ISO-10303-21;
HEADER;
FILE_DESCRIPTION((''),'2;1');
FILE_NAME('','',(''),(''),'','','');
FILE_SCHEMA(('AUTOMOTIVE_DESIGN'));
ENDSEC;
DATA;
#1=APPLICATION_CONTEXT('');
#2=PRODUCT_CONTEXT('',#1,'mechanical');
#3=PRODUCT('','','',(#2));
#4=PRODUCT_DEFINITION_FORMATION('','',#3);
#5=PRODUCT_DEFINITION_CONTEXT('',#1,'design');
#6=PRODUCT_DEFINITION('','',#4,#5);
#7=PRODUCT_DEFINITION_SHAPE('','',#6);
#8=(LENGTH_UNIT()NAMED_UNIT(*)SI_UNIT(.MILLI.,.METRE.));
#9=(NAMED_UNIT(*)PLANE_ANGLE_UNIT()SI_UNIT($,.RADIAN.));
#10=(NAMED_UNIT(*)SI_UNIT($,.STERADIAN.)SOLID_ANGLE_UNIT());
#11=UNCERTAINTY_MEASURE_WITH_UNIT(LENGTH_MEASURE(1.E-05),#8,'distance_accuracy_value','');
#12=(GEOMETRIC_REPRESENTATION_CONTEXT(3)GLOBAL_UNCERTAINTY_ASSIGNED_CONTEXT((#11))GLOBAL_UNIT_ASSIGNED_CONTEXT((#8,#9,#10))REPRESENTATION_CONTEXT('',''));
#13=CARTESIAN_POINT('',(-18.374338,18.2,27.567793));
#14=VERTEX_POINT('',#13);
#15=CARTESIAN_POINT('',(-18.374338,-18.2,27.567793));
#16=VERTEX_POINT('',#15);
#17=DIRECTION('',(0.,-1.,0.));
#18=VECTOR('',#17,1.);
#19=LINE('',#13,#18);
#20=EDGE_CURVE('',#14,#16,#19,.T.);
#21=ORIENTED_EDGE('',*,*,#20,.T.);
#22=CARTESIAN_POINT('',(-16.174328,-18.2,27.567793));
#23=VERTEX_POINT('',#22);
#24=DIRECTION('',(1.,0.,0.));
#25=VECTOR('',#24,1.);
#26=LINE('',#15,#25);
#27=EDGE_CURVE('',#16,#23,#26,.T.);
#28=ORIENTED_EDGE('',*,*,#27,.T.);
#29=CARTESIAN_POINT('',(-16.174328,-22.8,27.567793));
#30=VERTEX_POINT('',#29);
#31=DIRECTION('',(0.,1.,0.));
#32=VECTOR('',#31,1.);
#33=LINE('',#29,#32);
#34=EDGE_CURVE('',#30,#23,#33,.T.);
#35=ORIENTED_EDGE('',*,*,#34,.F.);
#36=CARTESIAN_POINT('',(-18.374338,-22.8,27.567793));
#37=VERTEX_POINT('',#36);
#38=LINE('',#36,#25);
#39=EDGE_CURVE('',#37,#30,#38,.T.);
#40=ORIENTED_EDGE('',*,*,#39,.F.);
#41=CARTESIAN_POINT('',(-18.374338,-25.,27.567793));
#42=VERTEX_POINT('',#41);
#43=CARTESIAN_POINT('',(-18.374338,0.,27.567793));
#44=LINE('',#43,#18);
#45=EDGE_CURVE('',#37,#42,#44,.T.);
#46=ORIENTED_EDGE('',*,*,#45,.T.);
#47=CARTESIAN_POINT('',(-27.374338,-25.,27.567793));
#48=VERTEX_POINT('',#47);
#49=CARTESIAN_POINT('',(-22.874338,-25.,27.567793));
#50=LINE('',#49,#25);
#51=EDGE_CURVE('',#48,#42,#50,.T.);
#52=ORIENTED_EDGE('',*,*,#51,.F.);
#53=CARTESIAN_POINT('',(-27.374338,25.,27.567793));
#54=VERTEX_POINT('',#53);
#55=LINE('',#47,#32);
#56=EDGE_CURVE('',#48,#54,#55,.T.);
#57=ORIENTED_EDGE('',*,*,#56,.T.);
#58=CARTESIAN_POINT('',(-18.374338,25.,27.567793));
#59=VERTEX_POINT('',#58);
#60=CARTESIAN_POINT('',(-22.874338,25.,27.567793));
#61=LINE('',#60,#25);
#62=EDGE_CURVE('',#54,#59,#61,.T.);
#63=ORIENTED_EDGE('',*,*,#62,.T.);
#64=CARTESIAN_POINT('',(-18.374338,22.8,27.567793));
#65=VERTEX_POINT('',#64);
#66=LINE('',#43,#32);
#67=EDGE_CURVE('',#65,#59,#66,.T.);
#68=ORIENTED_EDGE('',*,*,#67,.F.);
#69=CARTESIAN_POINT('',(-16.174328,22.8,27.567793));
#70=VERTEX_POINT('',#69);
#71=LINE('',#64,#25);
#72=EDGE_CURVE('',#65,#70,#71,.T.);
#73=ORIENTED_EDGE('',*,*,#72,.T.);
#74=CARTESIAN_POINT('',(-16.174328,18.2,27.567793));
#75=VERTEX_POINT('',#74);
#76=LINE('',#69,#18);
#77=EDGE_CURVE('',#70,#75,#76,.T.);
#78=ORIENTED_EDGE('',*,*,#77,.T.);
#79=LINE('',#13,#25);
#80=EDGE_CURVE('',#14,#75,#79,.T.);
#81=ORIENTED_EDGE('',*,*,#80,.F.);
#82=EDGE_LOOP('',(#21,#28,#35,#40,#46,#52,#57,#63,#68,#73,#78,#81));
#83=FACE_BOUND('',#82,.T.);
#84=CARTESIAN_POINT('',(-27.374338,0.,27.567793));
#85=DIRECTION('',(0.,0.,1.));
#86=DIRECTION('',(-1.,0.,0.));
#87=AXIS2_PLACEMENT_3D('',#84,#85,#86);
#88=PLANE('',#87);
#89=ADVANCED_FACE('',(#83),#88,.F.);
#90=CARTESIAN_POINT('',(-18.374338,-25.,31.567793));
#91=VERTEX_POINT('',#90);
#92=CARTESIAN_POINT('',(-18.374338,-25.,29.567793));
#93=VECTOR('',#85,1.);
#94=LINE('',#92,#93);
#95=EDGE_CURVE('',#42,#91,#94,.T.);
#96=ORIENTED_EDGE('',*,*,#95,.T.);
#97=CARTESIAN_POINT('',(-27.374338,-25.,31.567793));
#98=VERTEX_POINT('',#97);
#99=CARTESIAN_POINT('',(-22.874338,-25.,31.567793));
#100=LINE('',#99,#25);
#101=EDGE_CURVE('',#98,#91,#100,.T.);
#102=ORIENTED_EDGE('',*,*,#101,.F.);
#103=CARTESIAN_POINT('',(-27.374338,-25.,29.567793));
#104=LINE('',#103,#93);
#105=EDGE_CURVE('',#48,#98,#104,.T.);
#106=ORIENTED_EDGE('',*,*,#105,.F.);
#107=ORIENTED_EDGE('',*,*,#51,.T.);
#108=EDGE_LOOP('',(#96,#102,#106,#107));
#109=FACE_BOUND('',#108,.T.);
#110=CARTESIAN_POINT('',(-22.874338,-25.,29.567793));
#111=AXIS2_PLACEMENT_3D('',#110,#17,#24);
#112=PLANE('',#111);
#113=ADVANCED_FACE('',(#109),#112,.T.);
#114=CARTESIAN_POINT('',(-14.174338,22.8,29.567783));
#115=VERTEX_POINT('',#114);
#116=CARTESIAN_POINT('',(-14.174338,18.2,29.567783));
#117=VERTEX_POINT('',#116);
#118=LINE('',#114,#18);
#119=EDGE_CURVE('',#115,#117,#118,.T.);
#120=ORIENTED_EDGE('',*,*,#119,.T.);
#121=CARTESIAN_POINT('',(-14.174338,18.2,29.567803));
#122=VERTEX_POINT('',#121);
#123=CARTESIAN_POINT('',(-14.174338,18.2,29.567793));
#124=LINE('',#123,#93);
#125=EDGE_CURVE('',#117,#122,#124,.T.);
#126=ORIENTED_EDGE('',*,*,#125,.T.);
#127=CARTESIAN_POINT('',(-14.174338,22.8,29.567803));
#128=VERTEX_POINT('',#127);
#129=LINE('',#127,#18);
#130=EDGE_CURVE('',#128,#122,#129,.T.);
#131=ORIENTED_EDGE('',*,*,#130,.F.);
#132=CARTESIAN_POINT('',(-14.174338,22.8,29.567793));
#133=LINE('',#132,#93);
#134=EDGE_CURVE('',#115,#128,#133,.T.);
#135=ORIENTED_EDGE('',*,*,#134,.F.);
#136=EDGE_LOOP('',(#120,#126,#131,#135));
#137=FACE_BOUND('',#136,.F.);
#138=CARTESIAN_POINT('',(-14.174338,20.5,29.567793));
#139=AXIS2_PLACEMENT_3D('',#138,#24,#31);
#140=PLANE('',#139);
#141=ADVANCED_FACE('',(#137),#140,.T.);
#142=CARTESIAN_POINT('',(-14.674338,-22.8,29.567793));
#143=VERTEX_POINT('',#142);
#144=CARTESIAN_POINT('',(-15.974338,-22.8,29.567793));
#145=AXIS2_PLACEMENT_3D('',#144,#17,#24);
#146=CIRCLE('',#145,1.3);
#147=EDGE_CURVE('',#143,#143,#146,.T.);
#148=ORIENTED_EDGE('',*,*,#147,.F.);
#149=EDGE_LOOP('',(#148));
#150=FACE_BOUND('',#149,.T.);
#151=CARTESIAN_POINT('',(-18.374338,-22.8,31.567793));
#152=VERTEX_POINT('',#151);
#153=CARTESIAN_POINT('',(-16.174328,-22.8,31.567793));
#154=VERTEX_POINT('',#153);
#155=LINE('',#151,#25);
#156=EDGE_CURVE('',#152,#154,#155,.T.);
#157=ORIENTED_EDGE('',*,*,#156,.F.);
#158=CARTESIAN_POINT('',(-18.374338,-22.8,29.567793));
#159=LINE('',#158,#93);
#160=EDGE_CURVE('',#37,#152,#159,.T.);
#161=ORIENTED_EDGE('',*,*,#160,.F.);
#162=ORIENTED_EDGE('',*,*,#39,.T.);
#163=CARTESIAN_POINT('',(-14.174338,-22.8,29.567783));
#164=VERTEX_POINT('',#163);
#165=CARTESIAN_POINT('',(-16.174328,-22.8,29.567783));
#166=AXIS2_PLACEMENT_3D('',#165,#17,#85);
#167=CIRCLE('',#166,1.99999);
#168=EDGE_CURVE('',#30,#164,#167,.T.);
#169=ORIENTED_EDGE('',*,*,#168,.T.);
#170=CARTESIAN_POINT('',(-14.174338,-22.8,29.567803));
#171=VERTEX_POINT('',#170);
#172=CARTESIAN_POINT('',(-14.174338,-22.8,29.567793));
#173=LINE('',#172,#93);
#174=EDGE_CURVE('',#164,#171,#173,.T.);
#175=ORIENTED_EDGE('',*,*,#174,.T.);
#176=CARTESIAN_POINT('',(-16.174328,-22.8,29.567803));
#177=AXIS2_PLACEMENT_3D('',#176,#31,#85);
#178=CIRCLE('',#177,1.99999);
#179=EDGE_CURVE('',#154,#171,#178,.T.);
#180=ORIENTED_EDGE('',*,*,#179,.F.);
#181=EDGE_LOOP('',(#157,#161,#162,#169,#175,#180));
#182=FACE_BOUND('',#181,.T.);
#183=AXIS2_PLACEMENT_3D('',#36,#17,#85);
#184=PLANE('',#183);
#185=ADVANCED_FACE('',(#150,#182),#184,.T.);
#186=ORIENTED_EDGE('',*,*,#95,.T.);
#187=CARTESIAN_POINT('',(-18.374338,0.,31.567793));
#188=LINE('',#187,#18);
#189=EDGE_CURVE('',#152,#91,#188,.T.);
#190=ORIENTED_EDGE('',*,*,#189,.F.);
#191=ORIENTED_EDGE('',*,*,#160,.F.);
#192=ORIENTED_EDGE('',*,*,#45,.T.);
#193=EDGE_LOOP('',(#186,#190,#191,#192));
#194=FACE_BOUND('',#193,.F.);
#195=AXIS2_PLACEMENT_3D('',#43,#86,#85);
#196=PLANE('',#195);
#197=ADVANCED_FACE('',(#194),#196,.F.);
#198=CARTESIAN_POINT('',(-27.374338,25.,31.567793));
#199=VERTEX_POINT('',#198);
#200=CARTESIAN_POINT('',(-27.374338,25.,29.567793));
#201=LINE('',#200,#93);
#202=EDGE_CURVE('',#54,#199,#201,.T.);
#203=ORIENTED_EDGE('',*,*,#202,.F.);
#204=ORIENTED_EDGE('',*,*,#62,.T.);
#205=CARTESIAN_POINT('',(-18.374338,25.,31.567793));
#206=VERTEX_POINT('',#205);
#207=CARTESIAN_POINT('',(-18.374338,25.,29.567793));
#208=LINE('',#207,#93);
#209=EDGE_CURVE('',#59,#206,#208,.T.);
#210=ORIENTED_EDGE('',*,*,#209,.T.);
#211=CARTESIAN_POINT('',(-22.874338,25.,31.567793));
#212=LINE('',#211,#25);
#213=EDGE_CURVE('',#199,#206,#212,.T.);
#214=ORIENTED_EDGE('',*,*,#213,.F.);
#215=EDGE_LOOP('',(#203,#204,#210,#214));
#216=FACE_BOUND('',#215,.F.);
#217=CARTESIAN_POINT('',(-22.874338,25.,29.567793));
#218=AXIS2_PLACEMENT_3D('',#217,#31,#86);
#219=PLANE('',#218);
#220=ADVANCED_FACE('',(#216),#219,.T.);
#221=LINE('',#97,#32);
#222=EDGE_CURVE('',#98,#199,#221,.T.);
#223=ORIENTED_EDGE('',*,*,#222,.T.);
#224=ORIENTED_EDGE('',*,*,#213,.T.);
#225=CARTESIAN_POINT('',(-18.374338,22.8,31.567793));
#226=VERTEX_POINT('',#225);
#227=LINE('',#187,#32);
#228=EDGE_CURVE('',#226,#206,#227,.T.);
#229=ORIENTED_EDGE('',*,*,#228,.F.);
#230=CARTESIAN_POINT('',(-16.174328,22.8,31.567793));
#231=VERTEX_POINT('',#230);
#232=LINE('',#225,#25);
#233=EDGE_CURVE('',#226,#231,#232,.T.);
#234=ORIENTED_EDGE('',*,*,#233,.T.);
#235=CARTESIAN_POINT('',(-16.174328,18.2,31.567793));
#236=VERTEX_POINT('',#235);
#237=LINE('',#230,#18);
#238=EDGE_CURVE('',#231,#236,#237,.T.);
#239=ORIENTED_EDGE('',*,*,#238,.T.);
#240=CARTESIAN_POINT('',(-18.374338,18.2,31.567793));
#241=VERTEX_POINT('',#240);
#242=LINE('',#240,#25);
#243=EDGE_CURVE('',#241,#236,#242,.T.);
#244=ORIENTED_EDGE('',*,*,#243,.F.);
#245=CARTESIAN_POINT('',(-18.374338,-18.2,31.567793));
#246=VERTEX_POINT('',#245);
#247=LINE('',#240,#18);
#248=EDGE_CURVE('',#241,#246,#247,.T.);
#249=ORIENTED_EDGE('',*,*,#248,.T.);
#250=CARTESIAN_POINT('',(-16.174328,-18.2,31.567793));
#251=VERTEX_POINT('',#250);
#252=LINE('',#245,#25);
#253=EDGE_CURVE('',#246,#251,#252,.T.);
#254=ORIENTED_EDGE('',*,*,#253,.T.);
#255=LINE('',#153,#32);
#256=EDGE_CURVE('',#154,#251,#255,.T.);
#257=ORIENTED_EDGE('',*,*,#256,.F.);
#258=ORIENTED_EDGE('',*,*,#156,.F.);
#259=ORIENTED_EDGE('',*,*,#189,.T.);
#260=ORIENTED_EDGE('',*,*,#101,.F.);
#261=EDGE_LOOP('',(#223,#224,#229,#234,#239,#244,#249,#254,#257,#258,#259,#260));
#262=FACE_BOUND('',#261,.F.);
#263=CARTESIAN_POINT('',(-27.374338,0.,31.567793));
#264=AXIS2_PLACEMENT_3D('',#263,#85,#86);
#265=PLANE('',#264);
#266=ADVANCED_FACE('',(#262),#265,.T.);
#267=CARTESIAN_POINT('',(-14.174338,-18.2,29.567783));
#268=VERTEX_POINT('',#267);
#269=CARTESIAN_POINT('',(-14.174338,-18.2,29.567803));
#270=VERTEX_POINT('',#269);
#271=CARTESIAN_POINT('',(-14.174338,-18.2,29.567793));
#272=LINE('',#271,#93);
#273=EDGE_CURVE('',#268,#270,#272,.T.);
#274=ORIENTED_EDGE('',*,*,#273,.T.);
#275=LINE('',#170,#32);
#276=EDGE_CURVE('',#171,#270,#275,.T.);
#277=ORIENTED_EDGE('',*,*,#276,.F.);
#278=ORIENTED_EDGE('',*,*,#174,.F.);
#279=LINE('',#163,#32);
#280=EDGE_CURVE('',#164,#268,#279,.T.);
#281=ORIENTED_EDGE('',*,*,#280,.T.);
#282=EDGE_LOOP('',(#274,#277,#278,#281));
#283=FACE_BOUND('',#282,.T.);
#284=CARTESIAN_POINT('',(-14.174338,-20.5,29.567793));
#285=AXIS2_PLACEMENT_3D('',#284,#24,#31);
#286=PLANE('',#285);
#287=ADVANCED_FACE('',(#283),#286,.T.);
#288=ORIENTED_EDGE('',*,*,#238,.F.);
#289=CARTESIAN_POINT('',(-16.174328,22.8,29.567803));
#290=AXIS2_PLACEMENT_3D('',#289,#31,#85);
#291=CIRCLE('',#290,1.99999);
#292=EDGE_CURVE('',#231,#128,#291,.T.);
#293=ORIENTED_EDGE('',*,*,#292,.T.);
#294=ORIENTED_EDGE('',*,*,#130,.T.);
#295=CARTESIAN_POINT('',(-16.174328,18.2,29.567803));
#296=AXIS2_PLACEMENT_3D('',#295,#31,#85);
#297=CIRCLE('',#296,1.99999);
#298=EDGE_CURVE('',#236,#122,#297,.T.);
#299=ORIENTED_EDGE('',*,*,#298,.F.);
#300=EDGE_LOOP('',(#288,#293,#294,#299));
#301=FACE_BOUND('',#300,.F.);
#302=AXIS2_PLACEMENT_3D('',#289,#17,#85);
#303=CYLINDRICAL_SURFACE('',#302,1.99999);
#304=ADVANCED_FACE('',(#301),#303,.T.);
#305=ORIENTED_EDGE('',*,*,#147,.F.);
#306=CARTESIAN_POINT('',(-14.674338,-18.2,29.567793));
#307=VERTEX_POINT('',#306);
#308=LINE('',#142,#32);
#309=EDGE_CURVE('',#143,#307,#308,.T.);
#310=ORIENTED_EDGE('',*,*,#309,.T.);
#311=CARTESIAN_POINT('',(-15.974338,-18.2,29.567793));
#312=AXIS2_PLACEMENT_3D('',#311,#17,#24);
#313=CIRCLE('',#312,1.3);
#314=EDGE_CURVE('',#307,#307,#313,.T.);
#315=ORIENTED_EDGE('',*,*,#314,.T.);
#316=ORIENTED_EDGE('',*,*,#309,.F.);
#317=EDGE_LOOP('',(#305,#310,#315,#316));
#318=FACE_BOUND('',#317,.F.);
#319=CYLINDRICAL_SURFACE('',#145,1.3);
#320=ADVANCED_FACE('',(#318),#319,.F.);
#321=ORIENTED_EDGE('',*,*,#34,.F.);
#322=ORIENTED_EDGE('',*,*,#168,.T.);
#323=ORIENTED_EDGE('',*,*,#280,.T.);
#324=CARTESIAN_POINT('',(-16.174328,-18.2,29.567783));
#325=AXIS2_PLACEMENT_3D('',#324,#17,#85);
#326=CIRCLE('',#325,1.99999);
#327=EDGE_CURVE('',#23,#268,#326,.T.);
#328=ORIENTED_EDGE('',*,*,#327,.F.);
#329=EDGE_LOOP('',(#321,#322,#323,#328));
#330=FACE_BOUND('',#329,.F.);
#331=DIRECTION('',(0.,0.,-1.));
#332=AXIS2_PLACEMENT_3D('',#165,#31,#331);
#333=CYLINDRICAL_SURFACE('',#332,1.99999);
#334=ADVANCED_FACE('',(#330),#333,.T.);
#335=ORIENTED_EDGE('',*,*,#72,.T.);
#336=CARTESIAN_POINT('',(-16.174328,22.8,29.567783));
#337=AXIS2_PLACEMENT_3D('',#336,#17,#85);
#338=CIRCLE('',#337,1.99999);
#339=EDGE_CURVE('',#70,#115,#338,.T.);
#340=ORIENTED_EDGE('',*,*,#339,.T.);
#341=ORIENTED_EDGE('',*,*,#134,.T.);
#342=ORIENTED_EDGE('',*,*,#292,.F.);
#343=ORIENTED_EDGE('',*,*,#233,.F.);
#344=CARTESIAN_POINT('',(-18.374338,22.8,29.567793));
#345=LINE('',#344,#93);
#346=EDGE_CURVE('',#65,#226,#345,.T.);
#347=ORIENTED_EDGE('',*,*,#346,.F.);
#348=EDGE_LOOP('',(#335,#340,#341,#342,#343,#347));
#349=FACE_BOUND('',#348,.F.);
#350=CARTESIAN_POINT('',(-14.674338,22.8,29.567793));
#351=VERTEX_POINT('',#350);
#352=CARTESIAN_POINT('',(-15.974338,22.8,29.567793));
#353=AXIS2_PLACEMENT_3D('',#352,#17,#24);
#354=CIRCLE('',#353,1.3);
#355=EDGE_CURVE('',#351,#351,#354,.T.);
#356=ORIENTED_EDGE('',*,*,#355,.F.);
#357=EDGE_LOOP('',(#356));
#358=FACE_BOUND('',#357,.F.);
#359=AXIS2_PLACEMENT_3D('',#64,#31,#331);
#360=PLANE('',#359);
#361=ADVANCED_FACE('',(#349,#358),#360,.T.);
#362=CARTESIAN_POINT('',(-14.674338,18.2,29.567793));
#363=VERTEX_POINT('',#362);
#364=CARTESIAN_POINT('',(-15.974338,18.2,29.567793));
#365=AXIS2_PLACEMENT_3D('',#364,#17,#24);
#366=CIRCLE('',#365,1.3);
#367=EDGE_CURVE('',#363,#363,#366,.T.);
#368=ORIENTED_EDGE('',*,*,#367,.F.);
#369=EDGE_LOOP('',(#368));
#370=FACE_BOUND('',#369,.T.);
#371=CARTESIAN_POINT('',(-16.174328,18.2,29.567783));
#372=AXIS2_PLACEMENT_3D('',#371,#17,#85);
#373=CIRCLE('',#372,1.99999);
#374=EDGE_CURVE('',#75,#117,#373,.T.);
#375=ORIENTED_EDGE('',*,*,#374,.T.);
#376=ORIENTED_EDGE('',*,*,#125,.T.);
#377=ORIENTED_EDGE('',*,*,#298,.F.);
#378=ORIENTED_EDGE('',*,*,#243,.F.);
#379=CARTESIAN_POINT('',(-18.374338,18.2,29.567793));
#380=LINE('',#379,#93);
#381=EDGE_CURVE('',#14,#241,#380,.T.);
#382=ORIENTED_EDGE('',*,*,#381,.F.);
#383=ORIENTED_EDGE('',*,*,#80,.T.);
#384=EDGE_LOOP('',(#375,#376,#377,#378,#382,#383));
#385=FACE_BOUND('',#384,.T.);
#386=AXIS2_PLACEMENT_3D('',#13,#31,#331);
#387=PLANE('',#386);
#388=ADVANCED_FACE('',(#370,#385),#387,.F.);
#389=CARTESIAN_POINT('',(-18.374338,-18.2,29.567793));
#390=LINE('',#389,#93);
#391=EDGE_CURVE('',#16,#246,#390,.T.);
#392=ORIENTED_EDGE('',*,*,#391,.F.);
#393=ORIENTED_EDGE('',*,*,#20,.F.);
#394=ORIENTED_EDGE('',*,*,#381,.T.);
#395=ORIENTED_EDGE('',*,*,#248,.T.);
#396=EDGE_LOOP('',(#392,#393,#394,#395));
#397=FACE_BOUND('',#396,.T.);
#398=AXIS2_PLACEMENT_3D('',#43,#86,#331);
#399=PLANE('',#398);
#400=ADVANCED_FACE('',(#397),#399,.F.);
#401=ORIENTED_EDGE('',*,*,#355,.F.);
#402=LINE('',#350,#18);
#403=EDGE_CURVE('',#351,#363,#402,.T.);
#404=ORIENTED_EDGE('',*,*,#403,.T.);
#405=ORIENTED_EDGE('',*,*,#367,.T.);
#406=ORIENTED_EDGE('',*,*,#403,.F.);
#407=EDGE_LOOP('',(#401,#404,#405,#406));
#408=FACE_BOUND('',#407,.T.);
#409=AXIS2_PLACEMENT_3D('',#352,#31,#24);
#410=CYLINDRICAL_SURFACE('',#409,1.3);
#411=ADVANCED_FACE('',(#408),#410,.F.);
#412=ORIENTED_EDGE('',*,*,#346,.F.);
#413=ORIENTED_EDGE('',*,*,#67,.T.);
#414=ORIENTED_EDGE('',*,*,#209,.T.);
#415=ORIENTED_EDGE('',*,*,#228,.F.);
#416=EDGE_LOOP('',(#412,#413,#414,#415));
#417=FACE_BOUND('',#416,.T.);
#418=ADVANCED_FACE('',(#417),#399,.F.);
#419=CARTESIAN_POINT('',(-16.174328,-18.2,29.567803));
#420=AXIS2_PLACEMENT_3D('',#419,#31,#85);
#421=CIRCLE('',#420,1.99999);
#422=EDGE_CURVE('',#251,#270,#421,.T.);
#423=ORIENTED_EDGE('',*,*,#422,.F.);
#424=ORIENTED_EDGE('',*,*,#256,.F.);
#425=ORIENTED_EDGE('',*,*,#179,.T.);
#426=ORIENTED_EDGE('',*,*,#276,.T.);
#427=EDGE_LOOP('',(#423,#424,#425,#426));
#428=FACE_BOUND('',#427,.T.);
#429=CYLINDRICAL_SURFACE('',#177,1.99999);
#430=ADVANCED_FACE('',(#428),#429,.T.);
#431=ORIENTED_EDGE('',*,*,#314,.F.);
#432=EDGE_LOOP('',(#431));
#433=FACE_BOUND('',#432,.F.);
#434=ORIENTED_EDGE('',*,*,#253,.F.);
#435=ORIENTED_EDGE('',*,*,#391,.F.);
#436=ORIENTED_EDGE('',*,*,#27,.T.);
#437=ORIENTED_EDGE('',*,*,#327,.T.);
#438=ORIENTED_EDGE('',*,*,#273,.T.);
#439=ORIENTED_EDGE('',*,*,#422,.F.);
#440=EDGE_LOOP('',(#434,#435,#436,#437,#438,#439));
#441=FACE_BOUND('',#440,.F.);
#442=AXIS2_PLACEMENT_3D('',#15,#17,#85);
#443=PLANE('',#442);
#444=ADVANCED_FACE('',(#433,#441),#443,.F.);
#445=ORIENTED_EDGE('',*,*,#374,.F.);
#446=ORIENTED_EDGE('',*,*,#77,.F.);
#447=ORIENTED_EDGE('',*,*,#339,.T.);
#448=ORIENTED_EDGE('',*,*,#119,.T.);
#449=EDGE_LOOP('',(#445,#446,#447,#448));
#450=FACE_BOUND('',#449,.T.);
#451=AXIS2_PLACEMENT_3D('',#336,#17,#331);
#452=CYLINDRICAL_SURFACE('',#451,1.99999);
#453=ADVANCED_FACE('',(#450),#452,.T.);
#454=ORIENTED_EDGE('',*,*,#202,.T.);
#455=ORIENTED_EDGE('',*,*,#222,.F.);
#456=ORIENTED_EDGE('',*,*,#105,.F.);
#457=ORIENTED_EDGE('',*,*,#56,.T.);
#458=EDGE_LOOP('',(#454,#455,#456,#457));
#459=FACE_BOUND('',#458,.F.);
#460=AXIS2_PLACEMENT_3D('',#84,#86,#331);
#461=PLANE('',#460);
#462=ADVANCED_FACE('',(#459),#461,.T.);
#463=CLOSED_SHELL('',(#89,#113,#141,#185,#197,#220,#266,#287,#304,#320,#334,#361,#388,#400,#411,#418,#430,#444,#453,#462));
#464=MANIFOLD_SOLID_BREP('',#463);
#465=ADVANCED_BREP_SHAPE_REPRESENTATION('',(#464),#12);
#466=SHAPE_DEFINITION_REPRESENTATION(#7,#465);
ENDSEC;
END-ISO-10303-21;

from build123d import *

# Parameters (mm, degrees)
F0_W     = 9
F0_H     = 4
F1_DEPTH = 25
F2_W     = 4.6
F2_H     = 4
F3_DEPTH = 4.2
F4_R     = 1.3
F5_DEPTH = 25
F6_R     = 1.99999


# Not quite as in the source:
# - a fillet or chamfer is up to 0.001 mm smaller than in the source, because OpenCascade refuses the exact size


with BuildPart() as f1:
    # F0 (on Front) → F1 (new body)
    with BuildSketch(Plane.XZ):
        with Locations((-22.8743378759, 29.5677930117)):
            Rectangle(F0_W, F0_H)
    extrude(amount=F1_DEPTH)

    # F2 (on face) → F3 (join)
    with BuildSketch(Plane.YZ.offset(-18.3743378759)):
        with Locations((-20.5, 29.5677930117)):
            Rectangle(F2_W, F2_H)
    extrude(amount=F3_DEPTH)

    # F4 (on face) → F5 (cut)
    with BuildSketch(Plane.XZ.offset(22.8)):
        with Locations((-15.9743378759, 29.5677930117)):
            Circle(F4_R)
    extrude(amount=-F5_DEPTH, mode=Mode.SUBTRACT)

    # F6 (radius 2 in the source; OpenCascade refuses exactly that, so slightly less here)
    f6_edges = [f1.edges().sort_by_distance(p)[0] for p in [
        (-14.174338, -20.5, 31.567793),
        (-14.174338, -20.5, 27.567793),
    ]]
    fillet(f6_edges, radius=F6_R)

    # F7: F1 across face


with BuildPart() as f1_1:
    add(f1.part)
    add(f1.part.mirror(Plane(origin=(-22.8743378759, 0, 29.5677930117), x_dir=(1, 0, 0), z_dir=(0, 1, 0))))


with BuildPart() as f8_1:
    # F8: copy of F1
    add(f1_1.part)


solid = f1_1.part
